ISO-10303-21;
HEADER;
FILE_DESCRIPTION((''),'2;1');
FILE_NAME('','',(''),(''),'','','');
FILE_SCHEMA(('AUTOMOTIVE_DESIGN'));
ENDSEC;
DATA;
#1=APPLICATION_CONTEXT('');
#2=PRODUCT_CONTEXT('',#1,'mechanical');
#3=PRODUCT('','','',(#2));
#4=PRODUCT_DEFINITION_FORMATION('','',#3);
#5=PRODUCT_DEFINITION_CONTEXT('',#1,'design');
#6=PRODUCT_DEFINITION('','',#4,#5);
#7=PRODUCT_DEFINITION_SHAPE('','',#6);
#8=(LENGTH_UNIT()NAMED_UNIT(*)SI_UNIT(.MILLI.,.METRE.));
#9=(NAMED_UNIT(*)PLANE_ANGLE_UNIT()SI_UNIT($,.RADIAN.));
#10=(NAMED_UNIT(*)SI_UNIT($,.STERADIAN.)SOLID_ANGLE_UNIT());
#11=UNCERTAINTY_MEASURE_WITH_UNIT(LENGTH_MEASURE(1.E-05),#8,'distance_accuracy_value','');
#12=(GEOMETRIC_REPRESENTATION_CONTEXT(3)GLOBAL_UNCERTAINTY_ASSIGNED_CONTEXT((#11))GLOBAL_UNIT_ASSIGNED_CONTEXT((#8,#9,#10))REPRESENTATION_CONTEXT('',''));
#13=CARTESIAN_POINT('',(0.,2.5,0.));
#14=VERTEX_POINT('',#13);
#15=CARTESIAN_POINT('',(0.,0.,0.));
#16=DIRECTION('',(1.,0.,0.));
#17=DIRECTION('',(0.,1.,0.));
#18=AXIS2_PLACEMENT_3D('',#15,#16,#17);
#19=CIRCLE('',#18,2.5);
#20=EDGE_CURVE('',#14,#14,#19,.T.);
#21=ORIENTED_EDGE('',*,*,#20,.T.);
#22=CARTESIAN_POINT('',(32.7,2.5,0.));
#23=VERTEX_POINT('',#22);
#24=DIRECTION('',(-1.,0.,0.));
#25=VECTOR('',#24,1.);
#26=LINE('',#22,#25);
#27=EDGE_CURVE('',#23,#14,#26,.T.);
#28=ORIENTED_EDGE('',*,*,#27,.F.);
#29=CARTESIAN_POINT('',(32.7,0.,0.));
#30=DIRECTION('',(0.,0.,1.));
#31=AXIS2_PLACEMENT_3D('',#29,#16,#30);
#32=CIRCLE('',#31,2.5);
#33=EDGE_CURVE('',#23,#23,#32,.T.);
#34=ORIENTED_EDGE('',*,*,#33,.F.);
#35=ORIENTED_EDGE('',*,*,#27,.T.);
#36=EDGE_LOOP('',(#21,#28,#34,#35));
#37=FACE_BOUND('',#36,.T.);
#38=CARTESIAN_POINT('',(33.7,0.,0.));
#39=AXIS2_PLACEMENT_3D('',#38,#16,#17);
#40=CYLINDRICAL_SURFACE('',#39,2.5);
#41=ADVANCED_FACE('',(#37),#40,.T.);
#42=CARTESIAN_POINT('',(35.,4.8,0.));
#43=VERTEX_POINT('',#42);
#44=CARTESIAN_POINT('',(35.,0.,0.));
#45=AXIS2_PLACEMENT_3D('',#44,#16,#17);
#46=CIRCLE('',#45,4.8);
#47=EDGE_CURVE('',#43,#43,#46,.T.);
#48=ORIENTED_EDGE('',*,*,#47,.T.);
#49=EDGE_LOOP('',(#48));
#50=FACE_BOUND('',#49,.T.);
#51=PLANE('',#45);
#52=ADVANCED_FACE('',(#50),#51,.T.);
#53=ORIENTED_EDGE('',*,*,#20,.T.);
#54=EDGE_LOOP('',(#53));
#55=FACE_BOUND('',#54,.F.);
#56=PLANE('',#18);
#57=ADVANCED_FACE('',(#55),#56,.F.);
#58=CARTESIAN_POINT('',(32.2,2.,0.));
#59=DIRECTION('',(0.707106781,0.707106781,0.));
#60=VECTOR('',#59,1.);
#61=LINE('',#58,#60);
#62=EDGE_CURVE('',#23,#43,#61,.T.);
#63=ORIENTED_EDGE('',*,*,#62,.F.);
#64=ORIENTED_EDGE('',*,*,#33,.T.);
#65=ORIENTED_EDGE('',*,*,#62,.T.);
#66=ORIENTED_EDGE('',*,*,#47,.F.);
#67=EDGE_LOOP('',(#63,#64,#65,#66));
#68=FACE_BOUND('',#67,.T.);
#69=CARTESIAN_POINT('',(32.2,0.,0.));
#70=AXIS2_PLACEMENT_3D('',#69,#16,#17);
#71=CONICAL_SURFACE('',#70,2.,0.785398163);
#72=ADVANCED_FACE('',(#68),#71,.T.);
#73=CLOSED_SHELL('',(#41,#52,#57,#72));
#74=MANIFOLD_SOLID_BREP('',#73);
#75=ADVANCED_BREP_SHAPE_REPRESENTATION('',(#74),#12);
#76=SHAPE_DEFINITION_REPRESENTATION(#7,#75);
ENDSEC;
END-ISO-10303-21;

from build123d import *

# Parameters (mm, degrees)
F0_R        = 2.5
F1_DEPTH    = 35
F2_R        = 5
F2_R_2      = 2.5
F3_DEPTH    = 2.8
F4_S5_R     = 2.5
F4_T6_DEPTH = 9


# Not quite as in the source:
# - a fillet or chamfer that OpenCascade refuses, or shapes differently, is made with other operations: its cross-section is extruded or revolved along the edge and cut away or added


with BuildPart() as f1:
    # F0 (on Right) → F1 (new body)
    with BuildSketch(Plane.YZ):
        Circle(F0_R)
    extrude(amount=F1_DEPTH)

    # F2 (on face) → F3 (join)
    with BuildSketch(Plane.YZ.offset(35)):
        Circle(F2_R)
        Circle(F2_R_2, mode=Mode.SUBTRACT)
    extrude(amount=-F3_DEPTH)

    # F4: chamfer of 3 on 1 edges, made by hand


with BuildPart() as f4_tool2:
    # F4_s3 → F4_t4 (revolve)
    with BuildSketch(Plane.XY):
        Polygon((32.2, 2), (35.2, 5), (32.2, 5), align=None)
    revolve(axis=Axis((32.2, 0, 0), (1, 0, 0)))

    # F4_s5 → F4_t6 (cut, symmetric)
    with BuildSketch(Plane.YZ.offset(33.7)):
        Circle(F4_S5_R)
    extrude(amount=F4_T6_DEPTH, both=True, mode=Mode.SUBTRACT)


with BuildPart() as f1_1:
    add(f1.part)

    # F4_t1: cut F4_tool2
    add(f4_tool2.part, mode=Mode.SUBTRACT)


solid = f1_1.part
